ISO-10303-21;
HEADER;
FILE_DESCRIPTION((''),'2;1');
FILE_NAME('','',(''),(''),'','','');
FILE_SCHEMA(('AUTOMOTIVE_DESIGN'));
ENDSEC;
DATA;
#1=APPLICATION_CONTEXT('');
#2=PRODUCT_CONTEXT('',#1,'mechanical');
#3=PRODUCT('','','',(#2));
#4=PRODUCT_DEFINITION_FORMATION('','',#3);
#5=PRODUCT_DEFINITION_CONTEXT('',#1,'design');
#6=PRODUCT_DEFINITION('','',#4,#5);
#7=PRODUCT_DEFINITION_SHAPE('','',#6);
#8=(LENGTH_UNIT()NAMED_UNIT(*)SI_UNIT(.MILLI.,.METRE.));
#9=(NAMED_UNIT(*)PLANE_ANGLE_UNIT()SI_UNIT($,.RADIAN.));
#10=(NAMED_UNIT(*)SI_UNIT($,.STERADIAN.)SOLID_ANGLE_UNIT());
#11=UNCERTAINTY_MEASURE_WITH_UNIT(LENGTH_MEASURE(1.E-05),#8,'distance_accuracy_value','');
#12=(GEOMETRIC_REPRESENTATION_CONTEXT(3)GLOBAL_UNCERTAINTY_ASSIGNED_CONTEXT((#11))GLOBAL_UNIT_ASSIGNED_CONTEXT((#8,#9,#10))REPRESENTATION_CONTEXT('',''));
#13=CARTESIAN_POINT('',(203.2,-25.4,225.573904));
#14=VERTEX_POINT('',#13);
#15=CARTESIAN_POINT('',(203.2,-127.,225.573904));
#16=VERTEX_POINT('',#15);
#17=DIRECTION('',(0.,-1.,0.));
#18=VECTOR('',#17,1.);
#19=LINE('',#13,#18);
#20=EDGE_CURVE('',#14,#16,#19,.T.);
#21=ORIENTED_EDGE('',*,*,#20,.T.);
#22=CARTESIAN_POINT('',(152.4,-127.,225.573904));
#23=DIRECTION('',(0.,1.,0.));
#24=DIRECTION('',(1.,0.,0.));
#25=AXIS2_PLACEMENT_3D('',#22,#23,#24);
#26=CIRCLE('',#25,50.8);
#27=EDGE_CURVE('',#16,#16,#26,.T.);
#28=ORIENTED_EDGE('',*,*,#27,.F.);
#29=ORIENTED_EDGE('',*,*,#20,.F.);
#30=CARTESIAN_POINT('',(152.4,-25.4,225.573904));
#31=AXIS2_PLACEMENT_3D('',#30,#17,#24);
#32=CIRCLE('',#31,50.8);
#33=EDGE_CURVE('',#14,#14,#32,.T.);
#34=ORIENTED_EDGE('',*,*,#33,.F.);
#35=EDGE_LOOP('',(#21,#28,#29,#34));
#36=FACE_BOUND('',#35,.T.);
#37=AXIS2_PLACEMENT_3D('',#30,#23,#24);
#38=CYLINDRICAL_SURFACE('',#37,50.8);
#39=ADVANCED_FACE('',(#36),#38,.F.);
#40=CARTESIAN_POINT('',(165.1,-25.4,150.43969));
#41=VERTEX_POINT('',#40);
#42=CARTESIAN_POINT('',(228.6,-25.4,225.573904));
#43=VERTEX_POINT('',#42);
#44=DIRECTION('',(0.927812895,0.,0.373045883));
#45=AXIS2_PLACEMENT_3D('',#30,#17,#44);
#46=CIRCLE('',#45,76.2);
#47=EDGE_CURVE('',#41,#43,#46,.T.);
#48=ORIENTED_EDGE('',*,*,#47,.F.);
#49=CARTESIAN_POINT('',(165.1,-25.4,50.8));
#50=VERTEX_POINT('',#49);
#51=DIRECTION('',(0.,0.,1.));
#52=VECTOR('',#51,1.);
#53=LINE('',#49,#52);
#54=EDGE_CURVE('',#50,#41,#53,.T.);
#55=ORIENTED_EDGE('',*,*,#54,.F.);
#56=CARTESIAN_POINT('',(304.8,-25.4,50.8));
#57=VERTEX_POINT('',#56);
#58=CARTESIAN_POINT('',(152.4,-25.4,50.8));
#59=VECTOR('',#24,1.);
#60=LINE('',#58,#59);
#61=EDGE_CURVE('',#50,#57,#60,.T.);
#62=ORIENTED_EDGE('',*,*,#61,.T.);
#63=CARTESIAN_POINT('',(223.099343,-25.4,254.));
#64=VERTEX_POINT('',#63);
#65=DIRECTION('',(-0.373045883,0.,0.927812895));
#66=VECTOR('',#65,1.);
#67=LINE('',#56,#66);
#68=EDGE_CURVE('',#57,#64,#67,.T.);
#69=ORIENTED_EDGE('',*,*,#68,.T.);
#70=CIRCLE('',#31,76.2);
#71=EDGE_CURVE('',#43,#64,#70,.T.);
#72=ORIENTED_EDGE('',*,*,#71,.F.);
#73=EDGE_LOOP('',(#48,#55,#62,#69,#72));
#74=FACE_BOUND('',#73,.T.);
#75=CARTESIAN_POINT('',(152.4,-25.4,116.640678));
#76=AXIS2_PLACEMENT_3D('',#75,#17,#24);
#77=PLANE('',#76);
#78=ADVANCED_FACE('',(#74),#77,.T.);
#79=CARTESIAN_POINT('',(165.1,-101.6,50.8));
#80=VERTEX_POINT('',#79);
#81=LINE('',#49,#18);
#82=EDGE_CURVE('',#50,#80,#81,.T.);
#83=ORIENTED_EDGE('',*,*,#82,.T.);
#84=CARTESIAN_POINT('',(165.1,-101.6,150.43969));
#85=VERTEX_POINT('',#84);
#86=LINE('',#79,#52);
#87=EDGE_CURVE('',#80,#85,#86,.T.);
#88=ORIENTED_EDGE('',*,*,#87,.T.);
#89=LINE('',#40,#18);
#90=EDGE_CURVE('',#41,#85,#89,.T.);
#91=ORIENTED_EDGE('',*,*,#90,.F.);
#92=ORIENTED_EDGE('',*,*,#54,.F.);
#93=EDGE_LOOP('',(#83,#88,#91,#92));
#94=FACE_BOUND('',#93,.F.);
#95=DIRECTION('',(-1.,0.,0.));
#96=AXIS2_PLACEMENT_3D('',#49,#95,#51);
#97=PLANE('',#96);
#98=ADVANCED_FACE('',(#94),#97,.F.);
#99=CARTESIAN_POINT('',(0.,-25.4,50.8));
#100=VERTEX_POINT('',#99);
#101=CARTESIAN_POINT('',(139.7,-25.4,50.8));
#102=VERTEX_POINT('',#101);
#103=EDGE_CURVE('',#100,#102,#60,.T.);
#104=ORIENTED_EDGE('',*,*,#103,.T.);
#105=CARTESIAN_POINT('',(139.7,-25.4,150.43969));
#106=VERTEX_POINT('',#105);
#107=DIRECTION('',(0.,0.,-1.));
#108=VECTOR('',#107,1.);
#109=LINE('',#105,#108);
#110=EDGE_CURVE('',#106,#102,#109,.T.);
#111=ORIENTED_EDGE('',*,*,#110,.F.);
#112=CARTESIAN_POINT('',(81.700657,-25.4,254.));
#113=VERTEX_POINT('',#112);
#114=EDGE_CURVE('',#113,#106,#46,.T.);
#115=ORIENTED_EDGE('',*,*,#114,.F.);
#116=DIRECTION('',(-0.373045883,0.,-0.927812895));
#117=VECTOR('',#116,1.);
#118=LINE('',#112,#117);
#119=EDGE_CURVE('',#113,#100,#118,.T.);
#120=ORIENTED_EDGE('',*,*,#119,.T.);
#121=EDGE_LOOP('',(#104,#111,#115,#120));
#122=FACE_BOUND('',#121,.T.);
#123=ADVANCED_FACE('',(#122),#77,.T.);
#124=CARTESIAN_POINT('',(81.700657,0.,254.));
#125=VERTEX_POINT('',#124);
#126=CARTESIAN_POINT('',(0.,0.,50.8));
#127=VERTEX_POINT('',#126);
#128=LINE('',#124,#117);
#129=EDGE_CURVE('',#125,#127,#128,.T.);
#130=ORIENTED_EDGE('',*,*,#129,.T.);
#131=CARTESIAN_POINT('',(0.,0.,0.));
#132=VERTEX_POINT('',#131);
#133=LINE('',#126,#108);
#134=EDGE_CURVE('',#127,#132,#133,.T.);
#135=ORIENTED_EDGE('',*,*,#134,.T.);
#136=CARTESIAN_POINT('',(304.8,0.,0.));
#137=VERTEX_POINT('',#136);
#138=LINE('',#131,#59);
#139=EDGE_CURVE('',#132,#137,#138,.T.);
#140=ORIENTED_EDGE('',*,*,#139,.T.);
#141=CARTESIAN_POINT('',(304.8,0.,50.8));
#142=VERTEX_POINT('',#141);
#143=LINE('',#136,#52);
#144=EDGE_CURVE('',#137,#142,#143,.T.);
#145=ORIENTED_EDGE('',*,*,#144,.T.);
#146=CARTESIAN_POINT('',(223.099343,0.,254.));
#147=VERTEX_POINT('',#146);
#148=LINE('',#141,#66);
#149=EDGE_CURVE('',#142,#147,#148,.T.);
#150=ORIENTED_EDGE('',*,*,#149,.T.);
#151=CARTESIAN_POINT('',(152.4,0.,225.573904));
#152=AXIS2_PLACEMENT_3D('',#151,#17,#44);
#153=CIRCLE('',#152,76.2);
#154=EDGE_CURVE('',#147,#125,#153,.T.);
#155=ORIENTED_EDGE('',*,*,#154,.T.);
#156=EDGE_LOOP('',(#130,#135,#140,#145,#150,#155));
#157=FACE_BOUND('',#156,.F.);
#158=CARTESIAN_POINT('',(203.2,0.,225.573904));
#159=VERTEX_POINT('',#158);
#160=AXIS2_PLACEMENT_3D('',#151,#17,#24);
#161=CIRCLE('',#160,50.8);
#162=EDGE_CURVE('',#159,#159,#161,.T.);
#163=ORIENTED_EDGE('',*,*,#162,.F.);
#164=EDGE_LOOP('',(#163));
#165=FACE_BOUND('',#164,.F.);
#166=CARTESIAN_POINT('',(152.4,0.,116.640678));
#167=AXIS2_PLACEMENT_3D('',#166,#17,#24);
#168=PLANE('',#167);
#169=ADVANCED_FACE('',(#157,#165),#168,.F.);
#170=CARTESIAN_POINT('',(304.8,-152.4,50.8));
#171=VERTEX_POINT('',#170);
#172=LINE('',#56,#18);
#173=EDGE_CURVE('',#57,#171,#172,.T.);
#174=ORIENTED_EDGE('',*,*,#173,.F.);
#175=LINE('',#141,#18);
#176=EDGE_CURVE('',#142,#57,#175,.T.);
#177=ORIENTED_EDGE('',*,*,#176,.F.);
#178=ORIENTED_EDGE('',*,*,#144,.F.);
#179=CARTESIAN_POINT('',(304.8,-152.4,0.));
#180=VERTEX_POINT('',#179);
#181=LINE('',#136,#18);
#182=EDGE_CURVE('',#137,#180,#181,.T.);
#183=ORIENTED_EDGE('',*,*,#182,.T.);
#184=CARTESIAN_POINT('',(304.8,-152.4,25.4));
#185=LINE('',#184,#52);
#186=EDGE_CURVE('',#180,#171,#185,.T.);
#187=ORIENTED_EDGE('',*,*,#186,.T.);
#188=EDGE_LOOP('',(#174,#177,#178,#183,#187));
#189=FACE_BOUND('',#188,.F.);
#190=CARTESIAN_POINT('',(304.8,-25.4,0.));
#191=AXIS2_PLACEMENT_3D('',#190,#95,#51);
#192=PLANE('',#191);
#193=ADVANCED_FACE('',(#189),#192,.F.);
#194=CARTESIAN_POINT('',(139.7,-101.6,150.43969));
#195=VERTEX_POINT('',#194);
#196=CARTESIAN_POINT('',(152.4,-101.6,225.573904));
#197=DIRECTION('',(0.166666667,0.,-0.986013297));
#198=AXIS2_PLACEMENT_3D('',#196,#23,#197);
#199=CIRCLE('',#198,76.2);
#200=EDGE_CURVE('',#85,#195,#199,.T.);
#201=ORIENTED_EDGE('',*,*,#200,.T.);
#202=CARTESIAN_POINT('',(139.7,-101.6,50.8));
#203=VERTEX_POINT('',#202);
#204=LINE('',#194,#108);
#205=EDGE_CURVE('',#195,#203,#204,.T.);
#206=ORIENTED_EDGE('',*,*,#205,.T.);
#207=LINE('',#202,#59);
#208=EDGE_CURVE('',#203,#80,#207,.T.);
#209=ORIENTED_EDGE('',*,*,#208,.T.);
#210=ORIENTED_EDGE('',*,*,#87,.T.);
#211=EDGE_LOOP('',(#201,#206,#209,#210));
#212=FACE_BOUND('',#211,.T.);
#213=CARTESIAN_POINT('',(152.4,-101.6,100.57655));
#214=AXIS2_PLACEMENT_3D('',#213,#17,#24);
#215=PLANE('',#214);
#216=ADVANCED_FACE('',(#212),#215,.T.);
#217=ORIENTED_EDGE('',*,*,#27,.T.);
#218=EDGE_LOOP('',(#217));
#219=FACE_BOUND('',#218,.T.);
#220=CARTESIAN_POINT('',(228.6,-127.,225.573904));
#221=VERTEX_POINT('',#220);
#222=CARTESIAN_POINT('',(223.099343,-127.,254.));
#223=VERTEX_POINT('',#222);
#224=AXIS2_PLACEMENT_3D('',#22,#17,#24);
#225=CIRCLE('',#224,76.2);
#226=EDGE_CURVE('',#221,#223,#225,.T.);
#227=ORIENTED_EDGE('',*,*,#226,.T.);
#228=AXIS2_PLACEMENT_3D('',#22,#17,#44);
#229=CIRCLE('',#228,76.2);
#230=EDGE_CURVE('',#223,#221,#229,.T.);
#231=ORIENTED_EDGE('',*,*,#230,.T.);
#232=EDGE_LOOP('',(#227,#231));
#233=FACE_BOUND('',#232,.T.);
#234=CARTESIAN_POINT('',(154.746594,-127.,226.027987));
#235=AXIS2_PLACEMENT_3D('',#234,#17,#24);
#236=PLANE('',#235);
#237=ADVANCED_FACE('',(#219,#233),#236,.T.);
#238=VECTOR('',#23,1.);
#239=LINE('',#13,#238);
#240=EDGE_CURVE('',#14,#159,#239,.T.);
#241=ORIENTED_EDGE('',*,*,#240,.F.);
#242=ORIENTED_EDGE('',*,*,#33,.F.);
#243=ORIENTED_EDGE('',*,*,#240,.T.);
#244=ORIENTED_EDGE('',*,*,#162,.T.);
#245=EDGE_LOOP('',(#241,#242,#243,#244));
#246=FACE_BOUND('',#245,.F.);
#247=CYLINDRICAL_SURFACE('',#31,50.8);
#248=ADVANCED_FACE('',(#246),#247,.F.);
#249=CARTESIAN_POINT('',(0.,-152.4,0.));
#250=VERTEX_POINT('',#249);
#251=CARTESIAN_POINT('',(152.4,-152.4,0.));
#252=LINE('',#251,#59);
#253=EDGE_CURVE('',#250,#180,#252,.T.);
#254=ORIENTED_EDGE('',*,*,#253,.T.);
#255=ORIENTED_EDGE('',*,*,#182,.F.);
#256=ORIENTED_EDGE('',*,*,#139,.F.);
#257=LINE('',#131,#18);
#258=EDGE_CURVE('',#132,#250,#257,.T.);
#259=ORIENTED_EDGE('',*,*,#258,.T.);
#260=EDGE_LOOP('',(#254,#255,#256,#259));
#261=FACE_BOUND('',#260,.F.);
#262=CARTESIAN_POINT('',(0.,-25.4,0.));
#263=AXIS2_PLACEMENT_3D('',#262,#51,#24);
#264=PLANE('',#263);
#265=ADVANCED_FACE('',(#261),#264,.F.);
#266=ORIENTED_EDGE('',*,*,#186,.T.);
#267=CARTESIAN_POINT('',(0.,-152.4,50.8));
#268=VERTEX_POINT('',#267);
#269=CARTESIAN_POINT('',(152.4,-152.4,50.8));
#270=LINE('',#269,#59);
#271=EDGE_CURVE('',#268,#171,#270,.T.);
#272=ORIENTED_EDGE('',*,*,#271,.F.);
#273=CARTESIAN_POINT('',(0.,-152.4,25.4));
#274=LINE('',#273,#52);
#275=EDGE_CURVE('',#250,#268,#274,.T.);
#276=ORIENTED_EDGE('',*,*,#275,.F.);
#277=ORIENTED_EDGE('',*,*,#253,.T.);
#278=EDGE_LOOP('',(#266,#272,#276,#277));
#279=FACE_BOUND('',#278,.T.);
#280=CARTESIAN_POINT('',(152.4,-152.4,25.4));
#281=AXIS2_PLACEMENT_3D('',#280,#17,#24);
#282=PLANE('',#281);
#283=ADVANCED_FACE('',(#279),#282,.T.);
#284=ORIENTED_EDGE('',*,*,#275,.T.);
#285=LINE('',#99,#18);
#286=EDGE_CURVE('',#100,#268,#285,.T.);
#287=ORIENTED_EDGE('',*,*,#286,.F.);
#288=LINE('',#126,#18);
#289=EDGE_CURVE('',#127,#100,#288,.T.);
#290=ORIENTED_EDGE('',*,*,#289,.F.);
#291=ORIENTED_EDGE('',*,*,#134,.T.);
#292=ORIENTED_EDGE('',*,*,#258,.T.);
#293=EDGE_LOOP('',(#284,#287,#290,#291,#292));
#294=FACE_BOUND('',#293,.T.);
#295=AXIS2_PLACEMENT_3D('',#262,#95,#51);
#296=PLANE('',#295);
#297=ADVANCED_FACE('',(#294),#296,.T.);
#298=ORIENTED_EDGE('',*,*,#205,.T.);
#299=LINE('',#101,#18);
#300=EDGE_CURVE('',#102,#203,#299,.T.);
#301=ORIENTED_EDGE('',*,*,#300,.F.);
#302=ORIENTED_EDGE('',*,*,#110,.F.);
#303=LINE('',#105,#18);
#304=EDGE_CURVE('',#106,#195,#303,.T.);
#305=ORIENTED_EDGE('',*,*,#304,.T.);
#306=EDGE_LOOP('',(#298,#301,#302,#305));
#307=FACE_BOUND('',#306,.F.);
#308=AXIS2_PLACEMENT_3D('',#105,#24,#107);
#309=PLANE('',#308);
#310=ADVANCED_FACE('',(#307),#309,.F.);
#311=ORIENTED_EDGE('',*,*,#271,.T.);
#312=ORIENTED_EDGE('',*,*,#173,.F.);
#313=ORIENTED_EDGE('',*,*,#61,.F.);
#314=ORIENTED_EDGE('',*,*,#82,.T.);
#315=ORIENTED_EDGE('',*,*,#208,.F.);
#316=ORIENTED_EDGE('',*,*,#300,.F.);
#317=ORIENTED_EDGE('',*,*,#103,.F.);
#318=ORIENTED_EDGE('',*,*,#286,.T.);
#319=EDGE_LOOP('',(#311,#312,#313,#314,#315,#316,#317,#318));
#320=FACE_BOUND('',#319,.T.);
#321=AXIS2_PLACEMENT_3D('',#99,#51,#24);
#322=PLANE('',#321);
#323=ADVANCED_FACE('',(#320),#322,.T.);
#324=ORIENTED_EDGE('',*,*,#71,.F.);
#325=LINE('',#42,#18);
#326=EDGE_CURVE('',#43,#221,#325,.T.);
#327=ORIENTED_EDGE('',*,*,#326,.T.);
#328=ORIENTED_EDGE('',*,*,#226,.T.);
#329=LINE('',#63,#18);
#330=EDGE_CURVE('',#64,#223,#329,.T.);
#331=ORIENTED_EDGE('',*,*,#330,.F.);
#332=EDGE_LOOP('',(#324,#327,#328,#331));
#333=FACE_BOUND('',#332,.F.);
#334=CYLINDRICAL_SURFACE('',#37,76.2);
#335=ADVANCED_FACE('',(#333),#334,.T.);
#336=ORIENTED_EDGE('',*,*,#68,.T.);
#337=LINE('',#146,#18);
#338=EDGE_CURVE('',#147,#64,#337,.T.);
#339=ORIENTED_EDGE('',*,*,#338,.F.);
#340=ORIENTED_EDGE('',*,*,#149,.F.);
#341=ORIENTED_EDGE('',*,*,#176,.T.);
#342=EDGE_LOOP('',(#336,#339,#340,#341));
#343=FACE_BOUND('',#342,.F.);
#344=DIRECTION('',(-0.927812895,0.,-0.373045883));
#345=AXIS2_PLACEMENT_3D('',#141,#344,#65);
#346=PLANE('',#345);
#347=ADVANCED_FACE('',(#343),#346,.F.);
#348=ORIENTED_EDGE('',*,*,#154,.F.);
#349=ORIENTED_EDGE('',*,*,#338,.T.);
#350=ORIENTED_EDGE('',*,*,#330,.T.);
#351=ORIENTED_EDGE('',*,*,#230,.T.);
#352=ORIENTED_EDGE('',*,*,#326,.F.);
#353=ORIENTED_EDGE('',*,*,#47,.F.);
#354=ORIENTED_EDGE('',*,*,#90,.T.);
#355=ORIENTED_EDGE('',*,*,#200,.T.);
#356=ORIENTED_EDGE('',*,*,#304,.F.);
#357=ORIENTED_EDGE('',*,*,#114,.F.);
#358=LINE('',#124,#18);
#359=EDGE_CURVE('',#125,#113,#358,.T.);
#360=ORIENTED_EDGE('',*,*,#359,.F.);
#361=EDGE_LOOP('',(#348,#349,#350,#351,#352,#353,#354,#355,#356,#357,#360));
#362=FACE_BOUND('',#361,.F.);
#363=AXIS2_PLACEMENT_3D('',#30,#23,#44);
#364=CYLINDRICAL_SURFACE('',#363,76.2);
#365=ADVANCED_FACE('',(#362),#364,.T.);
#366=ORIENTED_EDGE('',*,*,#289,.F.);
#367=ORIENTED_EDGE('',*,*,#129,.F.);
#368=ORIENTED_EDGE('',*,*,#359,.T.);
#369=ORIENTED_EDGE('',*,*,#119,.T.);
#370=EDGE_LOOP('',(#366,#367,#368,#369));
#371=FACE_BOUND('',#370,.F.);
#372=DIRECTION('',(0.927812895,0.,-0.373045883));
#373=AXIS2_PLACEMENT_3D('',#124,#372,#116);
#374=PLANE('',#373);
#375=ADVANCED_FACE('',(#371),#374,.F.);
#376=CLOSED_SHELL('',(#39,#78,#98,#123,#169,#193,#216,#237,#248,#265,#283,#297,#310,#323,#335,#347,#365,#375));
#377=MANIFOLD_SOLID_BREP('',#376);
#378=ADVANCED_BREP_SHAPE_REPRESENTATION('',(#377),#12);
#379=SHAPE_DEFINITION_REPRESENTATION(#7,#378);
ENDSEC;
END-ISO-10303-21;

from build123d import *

# Parameters (mm, degrees)
F1_DEPTH      = 25.4
F2_W          = 304.8
F2_H          = 50.8
F3_DEPTH      = 127
F5_R          = 50.8
F6_DEPTH      = 25.401
F7_DEPTH      = 101.6
F8_DEPTH      = 127.001
F8_DEPTH_BACK = 25.401
F10_DEPTH     = 76.2


with BuildPart() as f1:
    # F0 (on Front) → F1 (new body)
    with BuildSketch(Plane.XZ):
        with BuildLine():
            Line((0, 50.8), (0, 0))
            Line((0, 0), (304.8, 0))
            Line((304.8, 0), (304.8, 50.8))
            Line((304.8, 50.8), (223.0993426351, 254))
            ThreePointArc((223.0993426351, 254), (152.4, 301.7739036981), (81.7006573649, 254))
            Line((81.7006573649, 254), (0, 50.8))
        make_face()
    extrude(amount=F1_DEPTH)

    # F2 (on face) → F3 (join)
    with BuildSketch(Plane.XZ.offset(25.4)):
        with Locations((152.4, 25.4)):
            Rectangle(F2_W, F2_H)
    extrude(amount=F3_DEPTH)

    # F5 (on face) → F6 (cut, through all)
    with BuildSketch(Plane.XZ.offset(25.4)):
        with Locations((152.4, 225.5739036981)):
            Circle(F5_R)
    extrude(amount=-F6_DEPTH, mode=Mode.SUBTRACT)

    # F4 (on face) → F7 (join)
    with BuildSketch(Plane.XZ.offset(25.4)):
        with BuildLine():
            ThreePointArc((81.7006573649, 254), (137.9232929986, 150.7617057996), (228.6, 225.5739036981))
            ThreePointArc((228.6, 225.5739036981), (227.2121978984, 240.0506106994), (223.0993426351, 254))
            ThreePointArc((223.0993426351, 254), (152.4, 301.7739036981), (81.7006573649, 254))
        make_face()
    extrude(amount=F7_DEPTH)

    # F5 (on face) → F8 (cut, two sides)
    with BuildSketch(Plane.XZ.offset(25.4)) as f8_sk:
        with Locations((152.4, 225.5739036981)):
            Circle(F5_R)
    extrude(amount=F8_DEPTH, mode=Mode.SUBTRACT)
    extrude(f8_sk.sketch, amount=-F8_DEPTH_BACK, mode=Mode.SUBTRACT)

    # F9 (on face) → F10 (join)
    with BuildSketch(Plane.XZ.offset(25.4)):
        with BuildLine():
            Line((139.7, 150.4396904527), (139.7, 50.8))
            Line((139.7, 50.8), (165.1, 50.8))
            Line((165.1, 50.8), (165.1, 150.4396904527))
            ThreePointArc((165.1, 150.4396904527), (152.4, 149.3739036981), (139.7, 150.4396904527))
        make_face()
    extrude(amount=F10_DEPTH)


solid = f1.part
